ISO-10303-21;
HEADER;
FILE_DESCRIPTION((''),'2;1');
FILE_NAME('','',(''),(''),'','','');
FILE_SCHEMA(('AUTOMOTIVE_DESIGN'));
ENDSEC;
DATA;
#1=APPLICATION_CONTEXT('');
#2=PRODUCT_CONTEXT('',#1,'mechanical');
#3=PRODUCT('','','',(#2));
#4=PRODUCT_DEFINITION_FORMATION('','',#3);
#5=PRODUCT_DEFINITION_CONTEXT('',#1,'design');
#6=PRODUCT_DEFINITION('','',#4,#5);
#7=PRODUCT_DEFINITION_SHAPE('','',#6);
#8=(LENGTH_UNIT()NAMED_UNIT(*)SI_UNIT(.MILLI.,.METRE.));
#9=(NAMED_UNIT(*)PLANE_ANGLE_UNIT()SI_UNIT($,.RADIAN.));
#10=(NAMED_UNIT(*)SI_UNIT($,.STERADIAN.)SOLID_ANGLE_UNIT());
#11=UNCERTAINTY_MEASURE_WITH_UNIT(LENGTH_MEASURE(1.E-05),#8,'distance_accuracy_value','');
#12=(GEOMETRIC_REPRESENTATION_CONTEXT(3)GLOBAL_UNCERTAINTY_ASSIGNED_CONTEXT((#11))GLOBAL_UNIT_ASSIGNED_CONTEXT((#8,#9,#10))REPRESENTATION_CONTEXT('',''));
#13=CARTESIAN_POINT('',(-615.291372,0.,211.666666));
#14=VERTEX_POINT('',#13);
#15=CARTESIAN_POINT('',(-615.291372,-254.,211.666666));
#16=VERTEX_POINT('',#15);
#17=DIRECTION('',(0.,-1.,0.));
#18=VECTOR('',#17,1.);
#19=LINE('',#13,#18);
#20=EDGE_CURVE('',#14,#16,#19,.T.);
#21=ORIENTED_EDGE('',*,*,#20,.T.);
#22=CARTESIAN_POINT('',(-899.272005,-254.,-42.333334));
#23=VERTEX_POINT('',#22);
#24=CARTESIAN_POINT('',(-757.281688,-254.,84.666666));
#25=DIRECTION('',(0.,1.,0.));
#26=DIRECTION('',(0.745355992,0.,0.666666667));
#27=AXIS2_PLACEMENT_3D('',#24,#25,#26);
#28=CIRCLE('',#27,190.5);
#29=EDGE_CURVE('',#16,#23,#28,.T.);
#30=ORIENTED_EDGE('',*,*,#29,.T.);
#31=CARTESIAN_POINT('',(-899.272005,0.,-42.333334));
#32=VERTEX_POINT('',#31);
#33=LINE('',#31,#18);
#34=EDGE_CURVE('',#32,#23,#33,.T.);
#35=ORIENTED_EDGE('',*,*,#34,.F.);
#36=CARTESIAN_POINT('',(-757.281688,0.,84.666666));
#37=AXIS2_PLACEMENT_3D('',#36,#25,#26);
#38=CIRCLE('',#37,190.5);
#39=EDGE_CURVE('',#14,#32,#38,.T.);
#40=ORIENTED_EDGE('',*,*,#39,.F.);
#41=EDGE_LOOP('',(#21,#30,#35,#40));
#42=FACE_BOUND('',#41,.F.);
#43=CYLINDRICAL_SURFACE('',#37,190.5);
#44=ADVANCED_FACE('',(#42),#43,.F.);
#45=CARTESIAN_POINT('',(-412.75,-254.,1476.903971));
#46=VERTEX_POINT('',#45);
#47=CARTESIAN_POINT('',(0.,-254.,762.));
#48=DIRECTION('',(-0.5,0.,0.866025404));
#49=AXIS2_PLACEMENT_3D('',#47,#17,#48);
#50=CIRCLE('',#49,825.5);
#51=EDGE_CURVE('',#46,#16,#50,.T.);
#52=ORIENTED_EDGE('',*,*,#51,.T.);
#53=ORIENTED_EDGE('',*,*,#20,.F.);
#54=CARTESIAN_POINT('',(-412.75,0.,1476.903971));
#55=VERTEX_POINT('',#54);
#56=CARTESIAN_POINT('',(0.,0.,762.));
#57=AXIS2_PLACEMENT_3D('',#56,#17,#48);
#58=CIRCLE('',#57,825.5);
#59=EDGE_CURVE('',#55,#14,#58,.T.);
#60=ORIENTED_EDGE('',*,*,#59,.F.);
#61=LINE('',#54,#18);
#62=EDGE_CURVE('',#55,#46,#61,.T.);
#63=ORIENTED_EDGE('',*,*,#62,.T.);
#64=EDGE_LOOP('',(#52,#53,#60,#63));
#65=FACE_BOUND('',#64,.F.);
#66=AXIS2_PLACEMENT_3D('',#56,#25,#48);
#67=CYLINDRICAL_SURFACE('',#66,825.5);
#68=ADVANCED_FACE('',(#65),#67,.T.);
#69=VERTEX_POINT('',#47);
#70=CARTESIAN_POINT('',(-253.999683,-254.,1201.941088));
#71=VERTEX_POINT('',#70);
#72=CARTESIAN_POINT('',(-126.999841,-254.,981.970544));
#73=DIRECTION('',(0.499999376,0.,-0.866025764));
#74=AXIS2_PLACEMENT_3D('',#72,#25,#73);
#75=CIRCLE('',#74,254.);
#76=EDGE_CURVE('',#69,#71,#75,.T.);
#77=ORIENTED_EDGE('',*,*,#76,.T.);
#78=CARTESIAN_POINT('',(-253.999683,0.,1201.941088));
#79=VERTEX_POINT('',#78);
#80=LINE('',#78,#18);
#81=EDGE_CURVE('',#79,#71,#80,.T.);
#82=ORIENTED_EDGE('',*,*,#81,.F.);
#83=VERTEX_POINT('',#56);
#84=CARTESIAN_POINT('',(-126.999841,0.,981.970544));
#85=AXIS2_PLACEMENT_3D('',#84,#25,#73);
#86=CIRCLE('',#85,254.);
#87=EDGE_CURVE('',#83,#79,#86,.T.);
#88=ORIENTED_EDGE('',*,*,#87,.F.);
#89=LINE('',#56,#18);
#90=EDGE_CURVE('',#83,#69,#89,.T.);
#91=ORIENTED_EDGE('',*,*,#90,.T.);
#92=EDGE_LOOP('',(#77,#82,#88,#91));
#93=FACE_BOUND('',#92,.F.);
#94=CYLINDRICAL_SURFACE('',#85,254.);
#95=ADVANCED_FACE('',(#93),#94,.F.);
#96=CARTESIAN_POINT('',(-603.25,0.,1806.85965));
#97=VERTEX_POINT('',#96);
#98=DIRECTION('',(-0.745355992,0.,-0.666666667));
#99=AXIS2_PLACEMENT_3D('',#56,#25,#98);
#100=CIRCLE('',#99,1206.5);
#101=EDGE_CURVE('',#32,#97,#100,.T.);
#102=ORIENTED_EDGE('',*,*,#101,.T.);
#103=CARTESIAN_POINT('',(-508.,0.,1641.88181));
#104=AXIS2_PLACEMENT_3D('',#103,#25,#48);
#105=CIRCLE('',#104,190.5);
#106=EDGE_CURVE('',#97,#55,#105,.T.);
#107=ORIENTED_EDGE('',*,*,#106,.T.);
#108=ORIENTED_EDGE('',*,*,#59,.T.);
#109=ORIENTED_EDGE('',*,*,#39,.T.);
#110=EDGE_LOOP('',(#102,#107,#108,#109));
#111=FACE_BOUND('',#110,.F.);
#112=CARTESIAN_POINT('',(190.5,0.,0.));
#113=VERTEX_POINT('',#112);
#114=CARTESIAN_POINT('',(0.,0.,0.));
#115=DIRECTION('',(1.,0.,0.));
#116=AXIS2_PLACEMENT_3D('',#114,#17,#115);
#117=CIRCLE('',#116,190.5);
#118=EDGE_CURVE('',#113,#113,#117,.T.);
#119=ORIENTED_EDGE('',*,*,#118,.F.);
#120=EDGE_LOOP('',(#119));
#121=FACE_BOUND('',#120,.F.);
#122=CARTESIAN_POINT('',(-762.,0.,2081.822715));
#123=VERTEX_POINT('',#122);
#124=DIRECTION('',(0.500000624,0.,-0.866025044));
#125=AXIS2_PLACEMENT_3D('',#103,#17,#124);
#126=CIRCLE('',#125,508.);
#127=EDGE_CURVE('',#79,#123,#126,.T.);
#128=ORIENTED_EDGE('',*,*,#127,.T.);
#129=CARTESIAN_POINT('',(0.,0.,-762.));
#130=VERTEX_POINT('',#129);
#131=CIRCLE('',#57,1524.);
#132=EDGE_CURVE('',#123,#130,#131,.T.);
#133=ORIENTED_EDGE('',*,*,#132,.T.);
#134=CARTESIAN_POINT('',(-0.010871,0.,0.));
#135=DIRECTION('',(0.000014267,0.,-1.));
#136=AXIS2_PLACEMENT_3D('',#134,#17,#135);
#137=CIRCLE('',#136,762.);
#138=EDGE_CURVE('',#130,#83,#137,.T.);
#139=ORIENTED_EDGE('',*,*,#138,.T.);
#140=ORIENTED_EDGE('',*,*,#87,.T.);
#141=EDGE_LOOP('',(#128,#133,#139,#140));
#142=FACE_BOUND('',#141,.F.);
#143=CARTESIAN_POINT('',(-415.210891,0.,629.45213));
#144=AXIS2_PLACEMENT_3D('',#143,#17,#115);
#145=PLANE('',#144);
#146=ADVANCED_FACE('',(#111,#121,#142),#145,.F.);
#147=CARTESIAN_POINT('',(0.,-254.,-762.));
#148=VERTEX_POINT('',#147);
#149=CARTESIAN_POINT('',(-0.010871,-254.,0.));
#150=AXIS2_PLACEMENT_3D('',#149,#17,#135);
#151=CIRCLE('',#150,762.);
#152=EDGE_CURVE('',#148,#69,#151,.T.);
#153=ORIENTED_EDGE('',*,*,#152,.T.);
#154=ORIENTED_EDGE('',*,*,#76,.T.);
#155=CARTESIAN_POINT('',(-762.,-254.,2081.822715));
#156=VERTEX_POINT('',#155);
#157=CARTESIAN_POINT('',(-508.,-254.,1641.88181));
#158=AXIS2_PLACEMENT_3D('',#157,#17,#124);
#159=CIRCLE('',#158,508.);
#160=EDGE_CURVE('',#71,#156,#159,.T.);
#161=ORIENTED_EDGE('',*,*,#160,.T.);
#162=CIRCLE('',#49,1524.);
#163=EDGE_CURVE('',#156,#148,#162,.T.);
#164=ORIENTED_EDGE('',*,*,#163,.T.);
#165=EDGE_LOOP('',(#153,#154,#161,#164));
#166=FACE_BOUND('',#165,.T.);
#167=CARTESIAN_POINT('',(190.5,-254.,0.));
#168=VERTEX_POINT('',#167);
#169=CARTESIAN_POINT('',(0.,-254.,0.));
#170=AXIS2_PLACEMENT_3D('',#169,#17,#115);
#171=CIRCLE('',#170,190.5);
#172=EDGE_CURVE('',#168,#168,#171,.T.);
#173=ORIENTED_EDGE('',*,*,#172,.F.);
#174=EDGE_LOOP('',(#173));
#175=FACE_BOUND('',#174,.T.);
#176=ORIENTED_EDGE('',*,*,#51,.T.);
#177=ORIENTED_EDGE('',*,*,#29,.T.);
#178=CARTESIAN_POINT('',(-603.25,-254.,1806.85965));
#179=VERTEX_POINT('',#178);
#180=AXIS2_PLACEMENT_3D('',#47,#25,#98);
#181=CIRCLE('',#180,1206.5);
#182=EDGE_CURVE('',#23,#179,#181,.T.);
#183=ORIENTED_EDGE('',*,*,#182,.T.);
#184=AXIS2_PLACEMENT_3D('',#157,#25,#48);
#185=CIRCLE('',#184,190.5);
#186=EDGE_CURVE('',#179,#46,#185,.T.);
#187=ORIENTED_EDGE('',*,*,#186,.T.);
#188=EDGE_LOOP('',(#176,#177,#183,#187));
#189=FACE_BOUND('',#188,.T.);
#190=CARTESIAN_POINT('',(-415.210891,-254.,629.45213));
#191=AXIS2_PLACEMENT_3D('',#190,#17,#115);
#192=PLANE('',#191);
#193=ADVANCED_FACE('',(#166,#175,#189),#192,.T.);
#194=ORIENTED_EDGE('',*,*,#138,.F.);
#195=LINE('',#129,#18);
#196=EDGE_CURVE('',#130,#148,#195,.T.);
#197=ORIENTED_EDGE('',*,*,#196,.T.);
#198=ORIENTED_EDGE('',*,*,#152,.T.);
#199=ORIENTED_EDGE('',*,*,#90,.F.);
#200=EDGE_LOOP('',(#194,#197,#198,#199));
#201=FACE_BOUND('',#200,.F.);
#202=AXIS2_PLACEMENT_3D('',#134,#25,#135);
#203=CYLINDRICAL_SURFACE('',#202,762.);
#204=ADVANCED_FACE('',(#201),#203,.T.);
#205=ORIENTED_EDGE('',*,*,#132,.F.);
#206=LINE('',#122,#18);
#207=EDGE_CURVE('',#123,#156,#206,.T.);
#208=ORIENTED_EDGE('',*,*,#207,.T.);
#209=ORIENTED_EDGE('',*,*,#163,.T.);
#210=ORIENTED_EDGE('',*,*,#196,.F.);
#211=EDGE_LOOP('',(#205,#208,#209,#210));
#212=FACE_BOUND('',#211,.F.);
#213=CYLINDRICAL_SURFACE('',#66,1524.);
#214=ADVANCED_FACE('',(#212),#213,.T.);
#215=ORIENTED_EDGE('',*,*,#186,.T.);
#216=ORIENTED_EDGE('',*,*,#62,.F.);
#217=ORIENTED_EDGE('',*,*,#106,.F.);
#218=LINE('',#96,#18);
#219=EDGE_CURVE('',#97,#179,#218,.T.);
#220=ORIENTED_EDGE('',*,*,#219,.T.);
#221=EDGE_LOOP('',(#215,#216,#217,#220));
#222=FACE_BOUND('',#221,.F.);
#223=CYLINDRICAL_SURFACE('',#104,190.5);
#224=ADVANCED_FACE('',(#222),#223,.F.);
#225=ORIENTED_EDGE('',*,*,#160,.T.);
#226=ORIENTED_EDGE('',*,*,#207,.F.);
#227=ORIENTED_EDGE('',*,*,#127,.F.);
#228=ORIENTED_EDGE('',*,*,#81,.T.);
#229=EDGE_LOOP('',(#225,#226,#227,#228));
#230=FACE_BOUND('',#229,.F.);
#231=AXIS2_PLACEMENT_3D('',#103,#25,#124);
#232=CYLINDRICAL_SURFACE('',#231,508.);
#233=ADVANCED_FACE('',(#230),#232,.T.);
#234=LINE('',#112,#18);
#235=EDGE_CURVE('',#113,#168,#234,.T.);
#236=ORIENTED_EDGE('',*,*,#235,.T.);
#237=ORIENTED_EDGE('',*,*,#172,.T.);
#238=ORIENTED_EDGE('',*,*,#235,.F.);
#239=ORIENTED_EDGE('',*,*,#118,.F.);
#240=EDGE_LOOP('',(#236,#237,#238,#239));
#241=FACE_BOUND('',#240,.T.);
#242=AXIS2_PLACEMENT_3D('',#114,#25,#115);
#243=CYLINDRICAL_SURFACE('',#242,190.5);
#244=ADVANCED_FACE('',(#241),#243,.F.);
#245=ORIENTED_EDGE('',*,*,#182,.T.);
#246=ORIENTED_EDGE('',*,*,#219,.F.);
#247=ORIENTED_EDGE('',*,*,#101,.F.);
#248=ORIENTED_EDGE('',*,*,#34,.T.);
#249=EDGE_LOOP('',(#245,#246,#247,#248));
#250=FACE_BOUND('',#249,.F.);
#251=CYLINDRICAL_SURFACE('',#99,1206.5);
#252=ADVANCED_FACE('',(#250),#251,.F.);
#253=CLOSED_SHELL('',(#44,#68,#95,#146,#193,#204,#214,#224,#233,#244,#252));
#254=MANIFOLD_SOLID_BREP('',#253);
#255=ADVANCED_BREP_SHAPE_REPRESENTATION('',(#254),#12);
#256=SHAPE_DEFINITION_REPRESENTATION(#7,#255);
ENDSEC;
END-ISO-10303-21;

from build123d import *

# Parameters (mm, degrees)
F0_R     = 190.5
F1_DEPTH = 254


# Not quite as in the source:
# - ends of sketch curves that miss each other by under 0.0002 mm in the source are joined


with BuildPart() as f1:
    # F0 (on Front) → F1 (new body)
    with BuildSketch(Plane.XZ):
        with BuildLine():
            ThreePointArc((-253.9996830053, 1201.9410881396), (-68.0591863861, 1895.8819687424), (-762, 2081.8227153675))
            ThreePointArc((-762, 2081.8227153675), (-1472.0709592645, 367.5597752638), (0, -762))
            ThreePointArc((0, -762), (761.9891288024, -7.75e-08), (0, 761.9999998449))
            ThreePointArc((0, 761.9999998449), (-346.9703855723, 854.9707025672), (-253.9996830053, 1201.9410881396))
        make_face()
        Circle(F0_R, mode=Mode.SUBTRACT)
        with BuildLine():
            ThreePointArc((-603.25, 1806.8596496659), (-343.0221605791, 1737.131810245), (-412.75, 1476.9039708241))
            ThreePointArc((-412.75, 1476.9039708241), (-815.1218466146, 892.4861122222), (-615.2913719088, 211.666666422))
            ThreePointArc((-615.2913719088, 211.666666422), (-630.28168848, -57.3236501492), (-899.2720050513, -42.333333578))
            ThreePointArc((-899.2720050513, -42.333333578), (-1191.3319294955, 952.7104717353), (-603.25, 1806.8596496659))
        make_face(mode=Mode.SUBTRACT)
    extrude(amount=F1_DEPTH)


solid = f1.part
